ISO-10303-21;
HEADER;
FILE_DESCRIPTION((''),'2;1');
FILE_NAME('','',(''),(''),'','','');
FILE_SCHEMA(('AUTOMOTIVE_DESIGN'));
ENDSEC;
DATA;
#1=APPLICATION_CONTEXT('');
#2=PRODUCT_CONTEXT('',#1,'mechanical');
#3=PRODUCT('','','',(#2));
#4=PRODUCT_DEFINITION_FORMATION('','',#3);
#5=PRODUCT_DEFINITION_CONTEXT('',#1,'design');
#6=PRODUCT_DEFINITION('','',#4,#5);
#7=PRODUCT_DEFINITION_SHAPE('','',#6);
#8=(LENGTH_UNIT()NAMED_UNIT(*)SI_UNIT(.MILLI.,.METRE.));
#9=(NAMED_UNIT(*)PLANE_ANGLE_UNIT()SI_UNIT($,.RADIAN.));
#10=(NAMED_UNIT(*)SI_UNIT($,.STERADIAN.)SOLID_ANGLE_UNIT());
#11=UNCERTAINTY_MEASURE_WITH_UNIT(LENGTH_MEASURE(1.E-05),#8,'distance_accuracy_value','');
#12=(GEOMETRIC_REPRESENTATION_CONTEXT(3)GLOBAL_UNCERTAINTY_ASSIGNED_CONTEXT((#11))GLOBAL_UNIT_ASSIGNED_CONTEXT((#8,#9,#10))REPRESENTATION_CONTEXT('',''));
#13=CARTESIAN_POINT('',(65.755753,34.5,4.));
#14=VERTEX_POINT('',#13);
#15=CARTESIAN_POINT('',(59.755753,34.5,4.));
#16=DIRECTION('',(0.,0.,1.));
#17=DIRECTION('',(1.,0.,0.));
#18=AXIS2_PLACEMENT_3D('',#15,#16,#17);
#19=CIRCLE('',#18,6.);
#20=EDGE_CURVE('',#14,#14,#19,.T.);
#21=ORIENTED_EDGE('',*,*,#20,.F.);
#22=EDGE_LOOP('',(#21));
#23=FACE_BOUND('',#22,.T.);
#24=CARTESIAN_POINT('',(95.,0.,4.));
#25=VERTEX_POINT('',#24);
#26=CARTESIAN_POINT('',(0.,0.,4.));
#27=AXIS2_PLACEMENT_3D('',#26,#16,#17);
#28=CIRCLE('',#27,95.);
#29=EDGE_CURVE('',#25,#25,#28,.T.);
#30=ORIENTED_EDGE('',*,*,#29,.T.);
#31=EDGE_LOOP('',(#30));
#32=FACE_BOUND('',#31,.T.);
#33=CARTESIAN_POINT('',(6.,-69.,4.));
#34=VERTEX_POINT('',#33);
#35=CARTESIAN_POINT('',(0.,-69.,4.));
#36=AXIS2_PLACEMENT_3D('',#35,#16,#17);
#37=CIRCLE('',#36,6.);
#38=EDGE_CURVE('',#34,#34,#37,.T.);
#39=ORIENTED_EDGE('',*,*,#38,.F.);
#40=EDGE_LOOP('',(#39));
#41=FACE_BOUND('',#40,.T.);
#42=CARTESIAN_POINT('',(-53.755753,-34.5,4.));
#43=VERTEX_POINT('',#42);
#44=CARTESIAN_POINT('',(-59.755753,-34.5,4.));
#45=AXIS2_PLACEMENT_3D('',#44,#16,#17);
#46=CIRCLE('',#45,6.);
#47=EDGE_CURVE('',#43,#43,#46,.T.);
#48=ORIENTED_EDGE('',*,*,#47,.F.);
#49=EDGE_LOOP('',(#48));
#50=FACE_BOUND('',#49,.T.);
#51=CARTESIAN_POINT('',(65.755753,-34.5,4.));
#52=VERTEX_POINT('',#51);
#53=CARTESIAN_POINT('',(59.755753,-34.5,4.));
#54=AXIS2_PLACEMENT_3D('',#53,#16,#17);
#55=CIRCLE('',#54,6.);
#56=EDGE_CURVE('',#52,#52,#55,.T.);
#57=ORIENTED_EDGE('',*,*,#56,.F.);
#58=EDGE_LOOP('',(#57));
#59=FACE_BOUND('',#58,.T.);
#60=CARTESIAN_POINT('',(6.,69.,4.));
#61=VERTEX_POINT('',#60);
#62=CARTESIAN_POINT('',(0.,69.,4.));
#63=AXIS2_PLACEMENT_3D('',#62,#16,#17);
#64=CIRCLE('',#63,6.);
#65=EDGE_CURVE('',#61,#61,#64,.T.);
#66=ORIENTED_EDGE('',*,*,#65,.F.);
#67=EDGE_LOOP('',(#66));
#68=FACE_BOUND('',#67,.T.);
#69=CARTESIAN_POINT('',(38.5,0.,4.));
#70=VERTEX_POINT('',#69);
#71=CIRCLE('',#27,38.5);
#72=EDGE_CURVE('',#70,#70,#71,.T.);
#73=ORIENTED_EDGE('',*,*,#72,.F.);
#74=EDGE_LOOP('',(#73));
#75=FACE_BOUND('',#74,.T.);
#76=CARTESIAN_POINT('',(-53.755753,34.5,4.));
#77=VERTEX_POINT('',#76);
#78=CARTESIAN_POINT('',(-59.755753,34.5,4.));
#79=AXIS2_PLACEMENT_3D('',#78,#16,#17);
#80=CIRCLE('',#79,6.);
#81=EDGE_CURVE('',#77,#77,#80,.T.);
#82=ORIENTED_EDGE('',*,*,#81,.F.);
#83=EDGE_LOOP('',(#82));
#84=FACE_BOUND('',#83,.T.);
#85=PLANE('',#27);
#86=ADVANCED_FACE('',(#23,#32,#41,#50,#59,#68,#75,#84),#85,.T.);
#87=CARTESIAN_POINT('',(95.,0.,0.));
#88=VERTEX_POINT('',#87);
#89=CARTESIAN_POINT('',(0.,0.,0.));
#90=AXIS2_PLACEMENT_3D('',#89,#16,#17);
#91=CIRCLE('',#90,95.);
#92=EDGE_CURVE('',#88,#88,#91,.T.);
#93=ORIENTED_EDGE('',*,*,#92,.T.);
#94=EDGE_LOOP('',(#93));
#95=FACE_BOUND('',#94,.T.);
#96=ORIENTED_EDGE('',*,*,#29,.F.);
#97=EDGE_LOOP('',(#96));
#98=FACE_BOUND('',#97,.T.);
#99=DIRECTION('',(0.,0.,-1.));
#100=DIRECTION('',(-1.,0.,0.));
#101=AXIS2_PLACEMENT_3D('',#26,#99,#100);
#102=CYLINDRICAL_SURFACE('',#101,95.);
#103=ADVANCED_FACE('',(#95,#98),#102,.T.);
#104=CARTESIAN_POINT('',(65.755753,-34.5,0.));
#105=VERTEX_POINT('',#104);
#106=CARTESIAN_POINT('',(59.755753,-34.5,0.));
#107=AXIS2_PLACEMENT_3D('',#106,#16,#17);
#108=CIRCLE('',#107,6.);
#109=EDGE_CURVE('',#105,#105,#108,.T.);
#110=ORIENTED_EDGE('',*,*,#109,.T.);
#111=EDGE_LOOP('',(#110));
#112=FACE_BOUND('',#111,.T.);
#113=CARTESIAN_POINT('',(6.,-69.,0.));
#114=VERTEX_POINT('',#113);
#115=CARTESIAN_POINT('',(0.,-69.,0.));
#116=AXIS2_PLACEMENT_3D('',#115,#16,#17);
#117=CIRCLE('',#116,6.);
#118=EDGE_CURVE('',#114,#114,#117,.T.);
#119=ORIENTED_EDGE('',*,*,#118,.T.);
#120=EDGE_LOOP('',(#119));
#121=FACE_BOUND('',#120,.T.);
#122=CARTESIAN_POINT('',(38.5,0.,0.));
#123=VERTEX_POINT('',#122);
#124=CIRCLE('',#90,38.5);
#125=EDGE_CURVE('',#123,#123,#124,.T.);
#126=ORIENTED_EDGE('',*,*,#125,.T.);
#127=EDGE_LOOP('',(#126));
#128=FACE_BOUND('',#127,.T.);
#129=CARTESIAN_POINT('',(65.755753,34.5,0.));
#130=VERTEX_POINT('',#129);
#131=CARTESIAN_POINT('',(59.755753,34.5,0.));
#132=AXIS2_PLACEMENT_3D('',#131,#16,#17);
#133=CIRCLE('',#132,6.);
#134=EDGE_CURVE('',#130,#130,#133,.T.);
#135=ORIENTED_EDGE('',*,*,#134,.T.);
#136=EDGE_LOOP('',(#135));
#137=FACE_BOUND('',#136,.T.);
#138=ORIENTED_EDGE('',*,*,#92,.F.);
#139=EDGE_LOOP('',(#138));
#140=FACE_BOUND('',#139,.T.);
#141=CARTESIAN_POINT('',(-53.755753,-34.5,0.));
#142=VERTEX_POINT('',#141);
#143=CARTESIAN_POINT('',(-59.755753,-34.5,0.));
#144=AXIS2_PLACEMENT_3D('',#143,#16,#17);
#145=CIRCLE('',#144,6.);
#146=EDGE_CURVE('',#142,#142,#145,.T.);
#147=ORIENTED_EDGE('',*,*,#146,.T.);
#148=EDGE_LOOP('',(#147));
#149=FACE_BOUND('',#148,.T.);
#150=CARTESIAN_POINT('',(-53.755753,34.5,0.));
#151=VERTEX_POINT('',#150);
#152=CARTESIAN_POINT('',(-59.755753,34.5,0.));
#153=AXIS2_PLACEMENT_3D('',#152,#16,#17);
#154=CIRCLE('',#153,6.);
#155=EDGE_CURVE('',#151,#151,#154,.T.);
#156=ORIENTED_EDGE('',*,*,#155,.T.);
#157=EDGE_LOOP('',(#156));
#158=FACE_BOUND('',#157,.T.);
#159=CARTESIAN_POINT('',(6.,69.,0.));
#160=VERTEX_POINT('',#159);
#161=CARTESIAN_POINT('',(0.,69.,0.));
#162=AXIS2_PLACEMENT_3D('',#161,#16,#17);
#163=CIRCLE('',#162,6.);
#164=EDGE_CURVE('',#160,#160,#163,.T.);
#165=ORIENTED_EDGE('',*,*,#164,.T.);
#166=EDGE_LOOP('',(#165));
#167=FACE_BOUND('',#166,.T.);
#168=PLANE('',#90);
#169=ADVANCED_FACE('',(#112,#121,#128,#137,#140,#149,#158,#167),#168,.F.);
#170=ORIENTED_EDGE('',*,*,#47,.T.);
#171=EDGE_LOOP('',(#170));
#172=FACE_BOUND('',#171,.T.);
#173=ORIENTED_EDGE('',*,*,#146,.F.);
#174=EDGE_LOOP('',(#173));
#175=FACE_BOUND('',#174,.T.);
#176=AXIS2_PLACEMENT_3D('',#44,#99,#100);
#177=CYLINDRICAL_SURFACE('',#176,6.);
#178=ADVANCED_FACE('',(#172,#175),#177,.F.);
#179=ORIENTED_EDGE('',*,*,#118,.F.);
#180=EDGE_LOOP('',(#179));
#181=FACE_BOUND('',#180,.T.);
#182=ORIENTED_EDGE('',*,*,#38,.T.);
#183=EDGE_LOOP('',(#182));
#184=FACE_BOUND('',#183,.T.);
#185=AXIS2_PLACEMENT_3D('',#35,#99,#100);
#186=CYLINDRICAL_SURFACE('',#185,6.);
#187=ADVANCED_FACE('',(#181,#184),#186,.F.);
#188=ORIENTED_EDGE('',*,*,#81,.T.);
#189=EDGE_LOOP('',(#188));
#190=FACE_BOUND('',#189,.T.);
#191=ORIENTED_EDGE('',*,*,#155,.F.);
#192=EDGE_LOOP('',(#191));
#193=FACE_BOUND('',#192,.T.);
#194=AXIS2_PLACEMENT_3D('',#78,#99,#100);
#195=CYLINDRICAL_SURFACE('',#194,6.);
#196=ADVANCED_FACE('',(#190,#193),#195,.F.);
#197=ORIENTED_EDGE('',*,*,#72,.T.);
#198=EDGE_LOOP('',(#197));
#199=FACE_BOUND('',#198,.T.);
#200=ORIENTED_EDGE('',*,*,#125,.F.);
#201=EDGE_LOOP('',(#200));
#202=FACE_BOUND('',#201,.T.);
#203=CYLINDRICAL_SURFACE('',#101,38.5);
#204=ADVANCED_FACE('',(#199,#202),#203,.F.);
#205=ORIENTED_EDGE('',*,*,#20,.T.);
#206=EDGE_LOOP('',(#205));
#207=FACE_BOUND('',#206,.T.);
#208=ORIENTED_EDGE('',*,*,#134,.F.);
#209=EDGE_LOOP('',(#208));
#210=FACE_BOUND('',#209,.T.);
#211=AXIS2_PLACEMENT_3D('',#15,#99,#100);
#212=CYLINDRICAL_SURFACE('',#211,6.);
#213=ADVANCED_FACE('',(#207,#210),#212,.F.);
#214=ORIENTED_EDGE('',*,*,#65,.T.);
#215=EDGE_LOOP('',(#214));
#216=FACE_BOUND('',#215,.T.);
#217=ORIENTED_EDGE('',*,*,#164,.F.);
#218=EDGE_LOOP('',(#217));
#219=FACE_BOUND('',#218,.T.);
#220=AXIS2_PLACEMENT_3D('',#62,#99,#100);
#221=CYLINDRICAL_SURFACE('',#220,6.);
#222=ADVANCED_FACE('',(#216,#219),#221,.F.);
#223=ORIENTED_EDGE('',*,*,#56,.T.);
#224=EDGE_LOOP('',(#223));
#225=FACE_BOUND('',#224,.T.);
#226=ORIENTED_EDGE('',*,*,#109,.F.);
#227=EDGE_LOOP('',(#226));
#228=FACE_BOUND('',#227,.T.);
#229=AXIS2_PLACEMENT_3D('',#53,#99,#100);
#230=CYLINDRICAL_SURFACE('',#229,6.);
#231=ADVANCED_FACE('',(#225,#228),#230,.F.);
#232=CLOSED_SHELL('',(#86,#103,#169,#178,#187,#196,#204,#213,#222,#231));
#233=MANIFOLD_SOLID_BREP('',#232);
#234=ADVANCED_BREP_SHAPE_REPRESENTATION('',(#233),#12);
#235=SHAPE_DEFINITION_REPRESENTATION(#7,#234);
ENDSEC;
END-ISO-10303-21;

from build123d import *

# Parameters (mm, degrees)
SKETCH_1_R             = 95
SKETCH_1_R_2           = 38.5
SKETCH_1_R_3           = 6
SM_BASE_FLANGE_1_DEPTH = 4


# Sheet-metal steps are written as plain solids
with BuildPart() as part:
    # Sketch 1 → Базовая кромка1 (new body)
    with BuildSketch(Plane.XY):
        Circle(SKETCH_1_R)
        Circle(SKETCH_1_R_2, mode=Mode.SUBTRACT)
        with Locations((0, 69)):
            Circle(SKETCH_1_R_3, mode=Mode.SUBTRACT)
        with Locations((59.755752861, 34.5)):
            Circle(SKETCH_1_R_3, mode=Mode.SUBTRACT)
        with Locations((59.755752861, -34.5)):
            Circle(SKETCH_1_R_3, mode=Mode.SUBTRACT)
        with Locations((0, -69)):
            Circle(SKETCH_1_R_3, mode=Mode.SUBTRACT)
        with Locations((-59.755752861, -34.5)):
            Circle(SKETCH_1_R_3, mode=Mode.SUBTRACT)
        with Locations((-59.755752861, 34.5)):
            Circle(SKETCH_1_R_3, mode=Mode.SUBTRACT)
    extrude(amount=SM_BASE_FLANGE_1_DEPTH)


solid = part.part
